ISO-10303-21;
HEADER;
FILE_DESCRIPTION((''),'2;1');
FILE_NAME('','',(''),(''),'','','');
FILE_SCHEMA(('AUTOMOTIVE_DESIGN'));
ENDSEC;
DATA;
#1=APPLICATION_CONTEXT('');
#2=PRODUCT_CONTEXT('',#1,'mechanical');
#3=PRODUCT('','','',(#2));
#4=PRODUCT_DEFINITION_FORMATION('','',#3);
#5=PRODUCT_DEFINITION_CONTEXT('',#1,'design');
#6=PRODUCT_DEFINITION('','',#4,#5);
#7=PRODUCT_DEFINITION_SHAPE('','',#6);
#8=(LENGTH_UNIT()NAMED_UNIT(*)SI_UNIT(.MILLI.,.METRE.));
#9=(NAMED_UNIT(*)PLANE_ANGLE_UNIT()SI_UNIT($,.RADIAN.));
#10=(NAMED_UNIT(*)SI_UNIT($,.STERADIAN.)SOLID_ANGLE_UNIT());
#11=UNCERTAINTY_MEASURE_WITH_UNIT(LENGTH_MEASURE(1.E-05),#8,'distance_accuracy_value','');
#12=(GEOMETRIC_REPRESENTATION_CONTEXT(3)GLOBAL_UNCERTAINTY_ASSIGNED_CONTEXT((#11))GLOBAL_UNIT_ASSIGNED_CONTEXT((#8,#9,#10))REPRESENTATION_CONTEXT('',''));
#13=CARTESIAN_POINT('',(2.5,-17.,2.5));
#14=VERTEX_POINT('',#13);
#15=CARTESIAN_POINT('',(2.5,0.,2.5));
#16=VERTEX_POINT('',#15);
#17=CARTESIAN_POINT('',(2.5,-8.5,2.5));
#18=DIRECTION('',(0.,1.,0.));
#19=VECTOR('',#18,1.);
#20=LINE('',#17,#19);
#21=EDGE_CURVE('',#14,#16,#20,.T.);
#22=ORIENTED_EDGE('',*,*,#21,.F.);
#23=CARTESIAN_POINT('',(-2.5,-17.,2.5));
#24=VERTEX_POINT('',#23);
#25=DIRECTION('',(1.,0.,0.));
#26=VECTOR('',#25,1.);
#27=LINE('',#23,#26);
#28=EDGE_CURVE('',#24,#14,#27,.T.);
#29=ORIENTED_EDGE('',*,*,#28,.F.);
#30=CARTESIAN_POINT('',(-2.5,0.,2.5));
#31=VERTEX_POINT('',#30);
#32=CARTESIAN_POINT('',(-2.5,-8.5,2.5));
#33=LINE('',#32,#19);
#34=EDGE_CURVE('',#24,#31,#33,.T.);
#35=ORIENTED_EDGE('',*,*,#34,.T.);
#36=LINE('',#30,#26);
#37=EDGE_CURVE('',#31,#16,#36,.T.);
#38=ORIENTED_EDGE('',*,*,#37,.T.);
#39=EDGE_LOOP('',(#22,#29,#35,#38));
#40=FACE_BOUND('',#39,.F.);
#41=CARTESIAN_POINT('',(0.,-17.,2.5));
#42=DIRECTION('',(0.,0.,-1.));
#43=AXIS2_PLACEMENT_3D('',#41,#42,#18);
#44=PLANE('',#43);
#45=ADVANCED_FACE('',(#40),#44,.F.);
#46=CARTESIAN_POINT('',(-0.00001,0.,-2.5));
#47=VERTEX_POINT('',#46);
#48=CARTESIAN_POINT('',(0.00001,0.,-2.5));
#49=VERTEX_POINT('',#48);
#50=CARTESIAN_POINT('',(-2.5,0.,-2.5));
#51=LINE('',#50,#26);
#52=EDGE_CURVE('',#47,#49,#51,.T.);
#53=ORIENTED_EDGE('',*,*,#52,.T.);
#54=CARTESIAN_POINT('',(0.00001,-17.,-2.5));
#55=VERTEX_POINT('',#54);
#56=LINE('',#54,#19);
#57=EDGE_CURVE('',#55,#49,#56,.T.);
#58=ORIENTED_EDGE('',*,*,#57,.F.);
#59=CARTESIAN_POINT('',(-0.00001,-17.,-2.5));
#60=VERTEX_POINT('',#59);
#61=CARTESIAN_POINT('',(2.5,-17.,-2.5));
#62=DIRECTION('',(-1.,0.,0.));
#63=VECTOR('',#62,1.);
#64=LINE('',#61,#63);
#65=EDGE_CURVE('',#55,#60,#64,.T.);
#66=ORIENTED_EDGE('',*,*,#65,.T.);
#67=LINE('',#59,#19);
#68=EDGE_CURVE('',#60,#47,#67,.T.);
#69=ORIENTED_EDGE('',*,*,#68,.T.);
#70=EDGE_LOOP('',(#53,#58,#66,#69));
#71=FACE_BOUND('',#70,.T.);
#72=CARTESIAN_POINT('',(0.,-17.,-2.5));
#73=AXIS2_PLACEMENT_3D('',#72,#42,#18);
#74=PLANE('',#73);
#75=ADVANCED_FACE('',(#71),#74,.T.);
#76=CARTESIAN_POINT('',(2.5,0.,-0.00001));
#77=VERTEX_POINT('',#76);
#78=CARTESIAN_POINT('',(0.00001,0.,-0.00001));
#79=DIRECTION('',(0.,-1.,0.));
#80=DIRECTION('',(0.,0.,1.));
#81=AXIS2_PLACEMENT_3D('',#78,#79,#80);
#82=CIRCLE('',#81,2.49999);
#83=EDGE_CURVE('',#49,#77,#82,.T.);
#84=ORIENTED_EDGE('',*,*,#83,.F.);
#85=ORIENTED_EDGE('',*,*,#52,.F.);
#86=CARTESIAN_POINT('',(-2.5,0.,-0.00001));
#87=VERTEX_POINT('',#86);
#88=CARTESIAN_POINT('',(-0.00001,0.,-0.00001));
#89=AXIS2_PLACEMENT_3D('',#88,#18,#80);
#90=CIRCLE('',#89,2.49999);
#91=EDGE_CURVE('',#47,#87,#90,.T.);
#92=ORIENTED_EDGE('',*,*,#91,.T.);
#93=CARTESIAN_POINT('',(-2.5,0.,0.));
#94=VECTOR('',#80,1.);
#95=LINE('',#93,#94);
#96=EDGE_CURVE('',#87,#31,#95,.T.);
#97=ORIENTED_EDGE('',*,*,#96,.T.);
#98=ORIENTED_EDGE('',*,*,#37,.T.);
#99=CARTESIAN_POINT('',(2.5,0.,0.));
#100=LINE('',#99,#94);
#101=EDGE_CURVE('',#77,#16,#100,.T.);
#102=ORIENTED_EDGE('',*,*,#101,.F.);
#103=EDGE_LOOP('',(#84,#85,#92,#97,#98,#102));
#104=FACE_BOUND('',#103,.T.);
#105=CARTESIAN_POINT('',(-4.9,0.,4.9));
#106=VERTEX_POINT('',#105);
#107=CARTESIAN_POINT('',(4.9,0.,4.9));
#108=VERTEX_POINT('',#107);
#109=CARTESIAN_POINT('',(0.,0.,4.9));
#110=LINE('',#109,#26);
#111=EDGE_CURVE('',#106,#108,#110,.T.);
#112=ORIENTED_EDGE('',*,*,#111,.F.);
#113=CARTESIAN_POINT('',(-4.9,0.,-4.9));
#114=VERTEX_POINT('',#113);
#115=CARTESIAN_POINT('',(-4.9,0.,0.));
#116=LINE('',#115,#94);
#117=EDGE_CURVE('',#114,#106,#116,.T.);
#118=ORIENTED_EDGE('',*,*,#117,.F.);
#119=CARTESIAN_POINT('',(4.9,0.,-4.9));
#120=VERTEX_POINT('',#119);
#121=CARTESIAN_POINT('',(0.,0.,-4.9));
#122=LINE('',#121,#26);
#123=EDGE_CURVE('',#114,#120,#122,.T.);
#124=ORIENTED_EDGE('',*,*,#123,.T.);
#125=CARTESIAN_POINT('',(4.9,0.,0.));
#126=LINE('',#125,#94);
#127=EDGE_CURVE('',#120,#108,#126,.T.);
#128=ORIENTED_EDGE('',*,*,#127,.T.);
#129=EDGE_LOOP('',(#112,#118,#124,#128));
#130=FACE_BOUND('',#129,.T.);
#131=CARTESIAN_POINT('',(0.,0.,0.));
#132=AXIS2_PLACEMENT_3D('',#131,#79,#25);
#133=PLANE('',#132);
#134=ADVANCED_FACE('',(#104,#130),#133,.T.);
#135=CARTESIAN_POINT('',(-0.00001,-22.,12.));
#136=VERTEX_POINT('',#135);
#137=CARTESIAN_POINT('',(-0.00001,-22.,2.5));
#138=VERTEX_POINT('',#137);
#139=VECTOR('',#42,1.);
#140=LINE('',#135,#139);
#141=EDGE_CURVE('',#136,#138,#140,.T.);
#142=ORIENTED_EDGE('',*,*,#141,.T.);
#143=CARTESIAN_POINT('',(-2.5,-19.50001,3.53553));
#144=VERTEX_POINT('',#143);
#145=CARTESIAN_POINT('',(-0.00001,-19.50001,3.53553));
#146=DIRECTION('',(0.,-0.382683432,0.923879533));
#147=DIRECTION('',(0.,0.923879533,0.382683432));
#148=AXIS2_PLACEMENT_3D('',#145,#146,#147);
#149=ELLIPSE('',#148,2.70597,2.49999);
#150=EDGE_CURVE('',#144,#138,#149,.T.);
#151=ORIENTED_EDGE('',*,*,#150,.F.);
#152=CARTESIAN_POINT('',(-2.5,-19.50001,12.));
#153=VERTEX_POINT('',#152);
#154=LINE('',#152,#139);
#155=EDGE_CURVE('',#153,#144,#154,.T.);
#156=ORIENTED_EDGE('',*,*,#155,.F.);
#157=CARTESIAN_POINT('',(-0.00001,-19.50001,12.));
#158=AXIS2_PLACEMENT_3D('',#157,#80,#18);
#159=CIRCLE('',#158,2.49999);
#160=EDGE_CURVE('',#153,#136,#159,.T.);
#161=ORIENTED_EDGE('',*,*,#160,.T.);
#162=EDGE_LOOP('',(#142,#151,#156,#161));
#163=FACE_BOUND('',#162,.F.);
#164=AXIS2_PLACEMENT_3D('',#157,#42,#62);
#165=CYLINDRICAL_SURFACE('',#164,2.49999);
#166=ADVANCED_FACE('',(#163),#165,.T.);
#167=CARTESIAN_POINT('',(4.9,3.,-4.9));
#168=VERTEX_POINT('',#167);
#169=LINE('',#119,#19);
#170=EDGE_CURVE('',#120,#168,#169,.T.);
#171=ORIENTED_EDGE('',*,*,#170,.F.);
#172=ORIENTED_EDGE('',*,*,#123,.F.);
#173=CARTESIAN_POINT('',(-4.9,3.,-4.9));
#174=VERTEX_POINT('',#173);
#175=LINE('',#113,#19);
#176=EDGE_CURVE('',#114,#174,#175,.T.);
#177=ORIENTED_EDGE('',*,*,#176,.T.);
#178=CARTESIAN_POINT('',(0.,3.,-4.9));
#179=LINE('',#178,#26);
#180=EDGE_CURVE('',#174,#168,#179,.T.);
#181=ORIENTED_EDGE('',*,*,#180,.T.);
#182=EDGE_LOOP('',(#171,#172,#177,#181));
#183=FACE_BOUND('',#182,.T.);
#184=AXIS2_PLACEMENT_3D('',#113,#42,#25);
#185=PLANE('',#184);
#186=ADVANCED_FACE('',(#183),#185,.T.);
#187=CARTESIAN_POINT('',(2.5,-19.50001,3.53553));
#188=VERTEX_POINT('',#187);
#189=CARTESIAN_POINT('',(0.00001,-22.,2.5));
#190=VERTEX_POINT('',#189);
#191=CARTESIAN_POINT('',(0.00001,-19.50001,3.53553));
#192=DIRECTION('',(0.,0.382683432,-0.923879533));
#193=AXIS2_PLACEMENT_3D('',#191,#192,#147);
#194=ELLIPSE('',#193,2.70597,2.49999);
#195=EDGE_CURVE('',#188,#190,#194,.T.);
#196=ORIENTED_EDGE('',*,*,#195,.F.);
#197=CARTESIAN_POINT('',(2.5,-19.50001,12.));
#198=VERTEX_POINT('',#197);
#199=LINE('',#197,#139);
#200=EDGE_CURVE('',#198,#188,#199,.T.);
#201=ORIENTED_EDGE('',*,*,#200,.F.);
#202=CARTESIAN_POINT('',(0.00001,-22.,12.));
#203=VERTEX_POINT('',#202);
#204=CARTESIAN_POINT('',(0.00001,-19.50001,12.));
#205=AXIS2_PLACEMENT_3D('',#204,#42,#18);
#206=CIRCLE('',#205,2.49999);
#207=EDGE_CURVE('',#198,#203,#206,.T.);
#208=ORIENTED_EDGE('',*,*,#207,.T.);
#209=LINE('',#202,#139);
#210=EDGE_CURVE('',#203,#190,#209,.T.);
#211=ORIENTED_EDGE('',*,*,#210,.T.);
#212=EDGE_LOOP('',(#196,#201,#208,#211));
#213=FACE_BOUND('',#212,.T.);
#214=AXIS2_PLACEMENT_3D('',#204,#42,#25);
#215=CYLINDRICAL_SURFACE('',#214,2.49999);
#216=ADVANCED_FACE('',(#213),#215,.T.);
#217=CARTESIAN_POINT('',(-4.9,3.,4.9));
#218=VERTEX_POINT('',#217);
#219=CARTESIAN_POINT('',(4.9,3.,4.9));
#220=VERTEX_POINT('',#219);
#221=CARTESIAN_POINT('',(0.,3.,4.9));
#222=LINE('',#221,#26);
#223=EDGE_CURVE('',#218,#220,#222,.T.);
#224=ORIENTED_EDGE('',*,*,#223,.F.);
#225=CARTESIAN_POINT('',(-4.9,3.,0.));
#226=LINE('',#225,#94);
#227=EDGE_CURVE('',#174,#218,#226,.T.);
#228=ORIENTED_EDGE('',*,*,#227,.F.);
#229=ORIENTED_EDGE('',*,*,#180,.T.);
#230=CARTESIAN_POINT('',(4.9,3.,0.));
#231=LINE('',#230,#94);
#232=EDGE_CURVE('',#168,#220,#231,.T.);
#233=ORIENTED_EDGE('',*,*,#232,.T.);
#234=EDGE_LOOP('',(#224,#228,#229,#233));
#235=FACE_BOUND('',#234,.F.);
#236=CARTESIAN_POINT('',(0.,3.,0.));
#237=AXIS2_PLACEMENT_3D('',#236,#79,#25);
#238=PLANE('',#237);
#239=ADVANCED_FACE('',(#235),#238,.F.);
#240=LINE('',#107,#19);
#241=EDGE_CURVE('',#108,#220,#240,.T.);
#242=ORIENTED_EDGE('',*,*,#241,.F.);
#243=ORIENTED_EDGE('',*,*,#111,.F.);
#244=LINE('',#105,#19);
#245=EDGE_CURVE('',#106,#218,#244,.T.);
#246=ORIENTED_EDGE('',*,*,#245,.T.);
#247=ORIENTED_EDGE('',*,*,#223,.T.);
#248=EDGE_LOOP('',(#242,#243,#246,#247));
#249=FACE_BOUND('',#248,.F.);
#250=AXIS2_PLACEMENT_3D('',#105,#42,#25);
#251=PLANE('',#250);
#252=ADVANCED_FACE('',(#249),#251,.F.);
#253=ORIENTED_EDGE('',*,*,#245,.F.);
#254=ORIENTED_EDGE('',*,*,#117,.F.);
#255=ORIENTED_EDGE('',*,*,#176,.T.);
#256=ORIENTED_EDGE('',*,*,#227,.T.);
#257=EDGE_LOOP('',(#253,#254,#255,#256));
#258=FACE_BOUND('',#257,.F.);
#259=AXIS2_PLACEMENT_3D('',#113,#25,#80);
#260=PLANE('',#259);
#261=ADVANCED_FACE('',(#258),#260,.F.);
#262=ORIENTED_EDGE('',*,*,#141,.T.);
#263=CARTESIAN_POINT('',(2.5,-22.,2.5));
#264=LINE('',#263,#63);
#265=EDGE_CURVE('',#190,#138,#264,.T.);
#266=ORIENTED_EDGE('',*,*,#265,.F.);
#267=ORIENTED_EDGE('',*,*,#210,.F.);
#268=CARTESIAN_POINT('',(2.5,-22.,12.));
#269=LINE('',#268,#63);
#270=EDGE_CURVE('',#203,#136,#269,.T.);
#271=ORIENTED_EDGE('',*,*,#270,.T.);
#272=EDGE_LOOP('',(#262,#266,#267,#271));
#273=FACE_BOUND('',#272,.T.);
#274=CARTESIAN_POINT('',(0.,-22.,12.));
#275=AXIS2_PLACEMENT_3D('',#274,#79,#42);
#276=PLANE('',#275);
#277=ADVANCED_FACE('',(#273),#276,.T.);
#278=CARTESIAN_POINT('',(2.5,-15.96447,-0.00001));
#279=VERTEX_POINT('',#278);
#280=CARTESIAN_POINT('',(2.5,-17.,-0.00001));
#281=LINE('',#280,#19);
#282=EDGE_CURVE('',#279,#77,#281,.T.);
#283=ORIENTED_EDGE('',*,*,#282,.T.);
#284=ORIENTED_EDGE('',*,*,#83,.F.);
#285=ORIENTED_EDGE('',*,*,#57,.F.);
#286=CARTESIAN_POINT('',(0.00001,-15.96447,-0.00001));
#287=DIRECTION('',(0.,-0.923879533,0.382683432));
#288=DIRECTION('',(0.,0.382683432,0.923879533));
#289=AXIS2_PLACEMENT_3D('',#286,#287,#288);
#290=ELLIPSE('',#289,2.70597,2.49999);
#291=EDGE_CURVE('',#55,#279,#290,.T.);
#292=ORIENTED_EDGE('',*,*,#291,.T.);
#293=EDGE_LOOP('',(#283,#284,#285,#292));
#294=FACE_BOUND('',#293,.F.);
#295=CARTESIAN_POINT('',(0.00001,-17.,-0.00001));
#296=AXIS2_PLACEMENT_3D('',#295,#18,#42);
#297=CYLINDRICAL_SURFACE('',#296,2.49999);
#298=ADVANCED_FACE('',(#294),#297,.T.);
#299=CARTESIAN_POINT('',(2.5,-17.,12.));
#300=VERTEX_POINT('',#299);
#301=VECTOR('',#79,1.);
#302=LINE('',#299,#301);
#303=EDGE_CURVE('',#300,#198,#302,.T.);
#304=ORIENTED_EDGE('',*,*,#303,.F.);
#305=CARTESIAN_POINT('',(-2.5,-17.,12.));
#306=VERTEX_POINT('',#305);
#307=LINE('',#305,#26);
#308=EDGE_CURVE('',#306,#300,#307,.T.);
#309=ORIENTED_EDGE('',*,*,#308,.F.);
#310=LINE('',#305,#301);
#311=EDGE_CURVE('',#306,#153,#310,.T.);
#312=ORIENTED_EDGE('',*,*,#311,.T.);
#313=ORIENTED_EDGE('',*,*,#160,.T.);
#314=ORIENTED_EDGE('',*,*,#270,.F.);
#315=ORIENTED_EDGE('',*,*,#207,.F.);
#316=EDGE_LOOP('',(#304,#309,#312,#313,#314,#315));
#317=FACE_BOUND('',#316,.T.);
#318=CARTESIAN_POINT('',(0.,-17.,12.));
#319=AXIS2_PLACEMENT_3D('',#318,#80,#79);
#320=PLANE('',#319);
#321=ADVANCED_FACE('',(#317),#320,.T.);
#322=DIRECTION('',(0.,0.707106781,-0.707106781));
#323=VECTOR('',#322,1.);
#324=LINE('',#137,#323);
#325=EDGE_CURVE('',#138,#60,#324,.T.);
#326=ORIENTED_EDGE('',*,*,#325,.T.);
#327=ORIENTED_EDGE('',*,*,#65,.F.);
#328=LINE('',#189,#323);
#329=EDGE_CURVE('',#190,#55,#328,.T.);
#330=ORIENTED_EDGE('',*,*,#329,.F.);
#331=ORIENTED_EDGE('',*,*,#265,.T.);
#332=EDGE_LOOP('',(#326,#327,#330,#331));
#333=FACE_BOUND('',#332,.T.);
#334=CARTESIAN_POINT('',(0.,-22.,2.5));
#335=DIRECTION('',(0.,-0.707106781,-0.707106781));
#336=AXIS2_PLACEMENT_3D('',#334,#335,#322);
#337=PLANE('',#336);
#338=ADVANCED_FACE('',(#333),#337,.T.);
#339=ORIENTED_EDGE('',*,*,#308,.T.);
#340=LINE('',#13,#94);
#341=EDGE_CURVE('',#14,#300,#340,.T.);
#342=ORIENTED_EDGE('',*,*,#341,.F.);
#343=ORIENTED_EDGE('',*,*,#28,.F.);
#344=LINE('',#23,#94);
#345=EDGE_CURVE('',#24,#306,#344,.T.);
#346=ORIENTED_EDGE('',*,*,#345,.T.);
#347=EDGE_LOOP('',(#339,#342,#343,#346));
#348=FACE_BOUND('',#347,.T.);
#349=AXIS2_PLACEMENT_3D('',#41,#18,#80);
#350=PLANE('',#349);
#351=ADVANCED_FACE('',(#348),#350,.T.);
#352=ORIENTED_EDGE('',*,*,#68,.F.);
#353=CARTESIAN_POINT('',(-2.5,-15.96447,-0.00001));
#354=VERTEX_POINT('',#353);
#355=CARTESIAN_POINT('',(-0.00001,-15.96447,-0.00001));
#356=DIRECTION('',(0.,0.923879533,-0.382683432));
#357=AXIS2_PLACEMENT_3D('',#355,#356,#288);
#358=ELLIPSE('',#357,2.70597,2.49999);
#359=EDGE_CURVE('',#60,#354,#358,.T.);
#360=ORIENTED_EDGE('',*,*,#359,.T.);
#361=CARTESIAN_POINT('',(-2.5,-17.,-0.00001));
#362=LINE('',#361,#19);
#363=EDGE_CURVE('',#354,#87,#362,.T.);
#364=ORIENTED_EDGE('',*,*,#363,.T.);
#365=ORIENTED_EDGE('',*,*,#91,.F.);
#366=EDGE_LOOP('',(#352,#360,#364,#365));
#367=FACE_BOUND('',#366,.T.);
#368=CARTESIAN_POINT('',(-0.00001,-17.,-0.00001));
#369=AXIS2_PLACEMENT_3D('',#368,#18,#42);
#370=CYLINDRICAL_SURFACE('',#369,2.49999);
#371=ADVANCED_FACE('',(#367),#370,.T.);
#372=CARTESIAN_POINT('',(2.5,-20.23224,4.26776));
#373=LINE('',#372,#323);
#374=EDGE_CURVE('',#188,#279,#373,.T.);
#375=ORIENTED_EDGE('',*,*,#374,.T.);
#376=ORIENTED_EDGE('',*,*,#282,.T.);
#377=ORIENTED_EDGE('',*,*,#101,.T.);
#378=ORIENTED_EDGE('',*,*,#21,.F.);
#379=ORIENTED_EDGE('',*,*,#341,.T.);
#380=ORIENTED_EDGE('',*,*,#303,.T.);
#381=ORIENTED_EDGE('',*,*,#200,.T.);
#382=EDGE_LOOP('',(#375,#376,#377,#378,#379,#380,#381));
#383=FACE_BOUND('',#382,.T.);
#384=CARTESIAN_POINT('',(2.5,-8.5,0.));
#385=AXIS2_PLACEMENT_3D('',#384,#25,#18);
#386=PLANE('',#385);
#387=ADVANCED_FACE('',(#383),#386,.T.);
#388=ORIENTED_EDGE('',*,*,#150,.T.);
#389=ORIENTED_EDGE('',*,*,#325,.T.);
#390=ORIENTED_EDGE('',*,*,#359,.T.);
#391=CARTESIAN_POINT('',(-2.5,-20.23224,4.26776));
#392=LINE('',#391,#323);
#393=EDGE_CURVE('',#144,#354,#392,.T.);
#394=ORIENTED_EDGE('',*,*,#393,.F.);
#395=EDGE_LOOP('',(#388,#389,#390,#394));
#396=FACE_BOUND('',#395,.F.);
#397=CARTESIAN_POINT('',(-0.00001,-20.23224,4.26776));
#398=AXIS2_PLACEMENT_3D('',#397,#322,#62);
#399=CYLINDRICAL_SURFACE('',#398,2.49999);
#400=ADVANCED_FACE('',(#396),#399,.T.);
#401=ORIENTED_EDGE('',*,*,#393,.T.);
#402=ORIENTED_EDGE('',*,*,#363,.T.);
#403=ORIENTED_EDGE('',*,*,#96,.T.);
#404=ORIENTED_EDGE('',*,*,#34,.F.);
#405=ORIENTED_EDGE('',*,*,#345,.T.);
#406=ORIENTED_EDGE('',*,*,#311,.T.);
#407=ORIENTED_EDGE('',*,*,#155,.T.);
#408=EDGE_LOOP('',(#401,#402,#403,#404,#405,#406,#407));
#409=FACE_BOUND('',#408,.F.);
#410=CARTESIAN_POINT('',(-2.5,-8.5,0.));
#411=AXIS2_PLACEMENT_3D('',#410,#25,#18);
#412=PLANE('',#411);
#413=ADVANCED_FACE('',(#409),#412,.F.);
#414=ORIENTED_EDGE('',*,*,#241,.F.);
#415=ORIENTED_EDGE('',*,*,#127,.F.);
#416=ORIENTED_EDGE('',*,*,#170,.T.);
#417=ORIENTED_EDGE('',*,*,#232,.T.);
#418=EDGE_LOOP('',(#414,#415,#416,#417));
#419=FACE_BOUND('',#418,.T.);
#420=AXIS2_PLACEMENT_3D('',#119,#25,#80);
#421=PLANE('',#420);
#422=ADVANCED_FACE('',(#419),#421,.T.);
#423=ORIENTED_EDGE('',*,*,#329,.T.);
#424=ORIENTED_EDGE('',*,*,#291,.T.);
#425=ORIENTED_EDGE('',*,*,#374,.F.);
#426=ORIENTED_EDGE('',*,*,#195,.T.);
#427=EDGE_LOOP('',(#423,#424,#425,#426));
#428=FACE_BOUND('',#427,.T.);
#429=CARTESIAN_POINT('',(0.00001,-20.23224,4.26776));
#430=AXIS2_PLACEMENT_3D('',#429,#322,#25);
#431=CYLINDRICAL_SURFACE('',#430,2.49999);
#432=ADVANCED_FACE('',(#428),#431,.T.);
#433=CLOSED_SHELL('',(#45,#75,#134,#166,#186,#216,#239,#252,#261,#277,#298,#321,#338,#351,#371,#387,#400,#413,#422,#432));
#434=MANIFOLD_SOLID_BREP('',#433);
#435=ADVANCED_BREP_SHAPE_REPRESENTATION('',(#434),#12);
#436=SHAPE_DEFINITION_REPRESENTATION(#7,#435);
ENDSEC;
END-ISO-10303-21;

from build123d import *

# Parameters (mm, degrees)
F0_W     = 9.8
F0_H     = 9.8
F2_DEPTH = 3
F1_W     = 17
F1_H     = 5
F3_DEPTH = 2.5
F4_R     = 2.49999


# Not quite as in the source:
# - a fillet or chamfer is up to 0.001 mm smaller than in the source, because OpenCascade refuses the exact size


with BuildPart() as f2:
    # F0 (on Front) → F2 (new body)
    with BuildSketch(Plane.XZ):
        Rectangle(F0_W, F0_H)
    extrude(amount=-F2_DEPTH)

    # F1 (on Right) → F3 (join, symmetric)
    with BuildSketch(Plane.YZ):
        with Locations((-8.5, 0)):
            Rectangle(F1_W, F1_H)
        Polygon((-17, -2.5), (-17, 2.5), (-17, 12), (-22, 12), (-22, 2.5), align=None)
    extrude(amount=F3_DEPTH, both=True)

    # F4 (radius 2.5 in the source; OpenCascade refuses exactly that, so slightly less here)
    f4_edges = [f2.edges().sort_by_distance(p)[0] for p in [
        (-2.5, -8.5, -2.5),
        (-2.5, -19.5, 0),
        (2.5, -8.5, -2.5),
        (2.5, -19.5, 0),
        (2.5, -22, 7.25),
        (-2.5, -22, 7.25),
    ]]
    fillet(f4_edges, radius=F4_R)


solid = f2.part
